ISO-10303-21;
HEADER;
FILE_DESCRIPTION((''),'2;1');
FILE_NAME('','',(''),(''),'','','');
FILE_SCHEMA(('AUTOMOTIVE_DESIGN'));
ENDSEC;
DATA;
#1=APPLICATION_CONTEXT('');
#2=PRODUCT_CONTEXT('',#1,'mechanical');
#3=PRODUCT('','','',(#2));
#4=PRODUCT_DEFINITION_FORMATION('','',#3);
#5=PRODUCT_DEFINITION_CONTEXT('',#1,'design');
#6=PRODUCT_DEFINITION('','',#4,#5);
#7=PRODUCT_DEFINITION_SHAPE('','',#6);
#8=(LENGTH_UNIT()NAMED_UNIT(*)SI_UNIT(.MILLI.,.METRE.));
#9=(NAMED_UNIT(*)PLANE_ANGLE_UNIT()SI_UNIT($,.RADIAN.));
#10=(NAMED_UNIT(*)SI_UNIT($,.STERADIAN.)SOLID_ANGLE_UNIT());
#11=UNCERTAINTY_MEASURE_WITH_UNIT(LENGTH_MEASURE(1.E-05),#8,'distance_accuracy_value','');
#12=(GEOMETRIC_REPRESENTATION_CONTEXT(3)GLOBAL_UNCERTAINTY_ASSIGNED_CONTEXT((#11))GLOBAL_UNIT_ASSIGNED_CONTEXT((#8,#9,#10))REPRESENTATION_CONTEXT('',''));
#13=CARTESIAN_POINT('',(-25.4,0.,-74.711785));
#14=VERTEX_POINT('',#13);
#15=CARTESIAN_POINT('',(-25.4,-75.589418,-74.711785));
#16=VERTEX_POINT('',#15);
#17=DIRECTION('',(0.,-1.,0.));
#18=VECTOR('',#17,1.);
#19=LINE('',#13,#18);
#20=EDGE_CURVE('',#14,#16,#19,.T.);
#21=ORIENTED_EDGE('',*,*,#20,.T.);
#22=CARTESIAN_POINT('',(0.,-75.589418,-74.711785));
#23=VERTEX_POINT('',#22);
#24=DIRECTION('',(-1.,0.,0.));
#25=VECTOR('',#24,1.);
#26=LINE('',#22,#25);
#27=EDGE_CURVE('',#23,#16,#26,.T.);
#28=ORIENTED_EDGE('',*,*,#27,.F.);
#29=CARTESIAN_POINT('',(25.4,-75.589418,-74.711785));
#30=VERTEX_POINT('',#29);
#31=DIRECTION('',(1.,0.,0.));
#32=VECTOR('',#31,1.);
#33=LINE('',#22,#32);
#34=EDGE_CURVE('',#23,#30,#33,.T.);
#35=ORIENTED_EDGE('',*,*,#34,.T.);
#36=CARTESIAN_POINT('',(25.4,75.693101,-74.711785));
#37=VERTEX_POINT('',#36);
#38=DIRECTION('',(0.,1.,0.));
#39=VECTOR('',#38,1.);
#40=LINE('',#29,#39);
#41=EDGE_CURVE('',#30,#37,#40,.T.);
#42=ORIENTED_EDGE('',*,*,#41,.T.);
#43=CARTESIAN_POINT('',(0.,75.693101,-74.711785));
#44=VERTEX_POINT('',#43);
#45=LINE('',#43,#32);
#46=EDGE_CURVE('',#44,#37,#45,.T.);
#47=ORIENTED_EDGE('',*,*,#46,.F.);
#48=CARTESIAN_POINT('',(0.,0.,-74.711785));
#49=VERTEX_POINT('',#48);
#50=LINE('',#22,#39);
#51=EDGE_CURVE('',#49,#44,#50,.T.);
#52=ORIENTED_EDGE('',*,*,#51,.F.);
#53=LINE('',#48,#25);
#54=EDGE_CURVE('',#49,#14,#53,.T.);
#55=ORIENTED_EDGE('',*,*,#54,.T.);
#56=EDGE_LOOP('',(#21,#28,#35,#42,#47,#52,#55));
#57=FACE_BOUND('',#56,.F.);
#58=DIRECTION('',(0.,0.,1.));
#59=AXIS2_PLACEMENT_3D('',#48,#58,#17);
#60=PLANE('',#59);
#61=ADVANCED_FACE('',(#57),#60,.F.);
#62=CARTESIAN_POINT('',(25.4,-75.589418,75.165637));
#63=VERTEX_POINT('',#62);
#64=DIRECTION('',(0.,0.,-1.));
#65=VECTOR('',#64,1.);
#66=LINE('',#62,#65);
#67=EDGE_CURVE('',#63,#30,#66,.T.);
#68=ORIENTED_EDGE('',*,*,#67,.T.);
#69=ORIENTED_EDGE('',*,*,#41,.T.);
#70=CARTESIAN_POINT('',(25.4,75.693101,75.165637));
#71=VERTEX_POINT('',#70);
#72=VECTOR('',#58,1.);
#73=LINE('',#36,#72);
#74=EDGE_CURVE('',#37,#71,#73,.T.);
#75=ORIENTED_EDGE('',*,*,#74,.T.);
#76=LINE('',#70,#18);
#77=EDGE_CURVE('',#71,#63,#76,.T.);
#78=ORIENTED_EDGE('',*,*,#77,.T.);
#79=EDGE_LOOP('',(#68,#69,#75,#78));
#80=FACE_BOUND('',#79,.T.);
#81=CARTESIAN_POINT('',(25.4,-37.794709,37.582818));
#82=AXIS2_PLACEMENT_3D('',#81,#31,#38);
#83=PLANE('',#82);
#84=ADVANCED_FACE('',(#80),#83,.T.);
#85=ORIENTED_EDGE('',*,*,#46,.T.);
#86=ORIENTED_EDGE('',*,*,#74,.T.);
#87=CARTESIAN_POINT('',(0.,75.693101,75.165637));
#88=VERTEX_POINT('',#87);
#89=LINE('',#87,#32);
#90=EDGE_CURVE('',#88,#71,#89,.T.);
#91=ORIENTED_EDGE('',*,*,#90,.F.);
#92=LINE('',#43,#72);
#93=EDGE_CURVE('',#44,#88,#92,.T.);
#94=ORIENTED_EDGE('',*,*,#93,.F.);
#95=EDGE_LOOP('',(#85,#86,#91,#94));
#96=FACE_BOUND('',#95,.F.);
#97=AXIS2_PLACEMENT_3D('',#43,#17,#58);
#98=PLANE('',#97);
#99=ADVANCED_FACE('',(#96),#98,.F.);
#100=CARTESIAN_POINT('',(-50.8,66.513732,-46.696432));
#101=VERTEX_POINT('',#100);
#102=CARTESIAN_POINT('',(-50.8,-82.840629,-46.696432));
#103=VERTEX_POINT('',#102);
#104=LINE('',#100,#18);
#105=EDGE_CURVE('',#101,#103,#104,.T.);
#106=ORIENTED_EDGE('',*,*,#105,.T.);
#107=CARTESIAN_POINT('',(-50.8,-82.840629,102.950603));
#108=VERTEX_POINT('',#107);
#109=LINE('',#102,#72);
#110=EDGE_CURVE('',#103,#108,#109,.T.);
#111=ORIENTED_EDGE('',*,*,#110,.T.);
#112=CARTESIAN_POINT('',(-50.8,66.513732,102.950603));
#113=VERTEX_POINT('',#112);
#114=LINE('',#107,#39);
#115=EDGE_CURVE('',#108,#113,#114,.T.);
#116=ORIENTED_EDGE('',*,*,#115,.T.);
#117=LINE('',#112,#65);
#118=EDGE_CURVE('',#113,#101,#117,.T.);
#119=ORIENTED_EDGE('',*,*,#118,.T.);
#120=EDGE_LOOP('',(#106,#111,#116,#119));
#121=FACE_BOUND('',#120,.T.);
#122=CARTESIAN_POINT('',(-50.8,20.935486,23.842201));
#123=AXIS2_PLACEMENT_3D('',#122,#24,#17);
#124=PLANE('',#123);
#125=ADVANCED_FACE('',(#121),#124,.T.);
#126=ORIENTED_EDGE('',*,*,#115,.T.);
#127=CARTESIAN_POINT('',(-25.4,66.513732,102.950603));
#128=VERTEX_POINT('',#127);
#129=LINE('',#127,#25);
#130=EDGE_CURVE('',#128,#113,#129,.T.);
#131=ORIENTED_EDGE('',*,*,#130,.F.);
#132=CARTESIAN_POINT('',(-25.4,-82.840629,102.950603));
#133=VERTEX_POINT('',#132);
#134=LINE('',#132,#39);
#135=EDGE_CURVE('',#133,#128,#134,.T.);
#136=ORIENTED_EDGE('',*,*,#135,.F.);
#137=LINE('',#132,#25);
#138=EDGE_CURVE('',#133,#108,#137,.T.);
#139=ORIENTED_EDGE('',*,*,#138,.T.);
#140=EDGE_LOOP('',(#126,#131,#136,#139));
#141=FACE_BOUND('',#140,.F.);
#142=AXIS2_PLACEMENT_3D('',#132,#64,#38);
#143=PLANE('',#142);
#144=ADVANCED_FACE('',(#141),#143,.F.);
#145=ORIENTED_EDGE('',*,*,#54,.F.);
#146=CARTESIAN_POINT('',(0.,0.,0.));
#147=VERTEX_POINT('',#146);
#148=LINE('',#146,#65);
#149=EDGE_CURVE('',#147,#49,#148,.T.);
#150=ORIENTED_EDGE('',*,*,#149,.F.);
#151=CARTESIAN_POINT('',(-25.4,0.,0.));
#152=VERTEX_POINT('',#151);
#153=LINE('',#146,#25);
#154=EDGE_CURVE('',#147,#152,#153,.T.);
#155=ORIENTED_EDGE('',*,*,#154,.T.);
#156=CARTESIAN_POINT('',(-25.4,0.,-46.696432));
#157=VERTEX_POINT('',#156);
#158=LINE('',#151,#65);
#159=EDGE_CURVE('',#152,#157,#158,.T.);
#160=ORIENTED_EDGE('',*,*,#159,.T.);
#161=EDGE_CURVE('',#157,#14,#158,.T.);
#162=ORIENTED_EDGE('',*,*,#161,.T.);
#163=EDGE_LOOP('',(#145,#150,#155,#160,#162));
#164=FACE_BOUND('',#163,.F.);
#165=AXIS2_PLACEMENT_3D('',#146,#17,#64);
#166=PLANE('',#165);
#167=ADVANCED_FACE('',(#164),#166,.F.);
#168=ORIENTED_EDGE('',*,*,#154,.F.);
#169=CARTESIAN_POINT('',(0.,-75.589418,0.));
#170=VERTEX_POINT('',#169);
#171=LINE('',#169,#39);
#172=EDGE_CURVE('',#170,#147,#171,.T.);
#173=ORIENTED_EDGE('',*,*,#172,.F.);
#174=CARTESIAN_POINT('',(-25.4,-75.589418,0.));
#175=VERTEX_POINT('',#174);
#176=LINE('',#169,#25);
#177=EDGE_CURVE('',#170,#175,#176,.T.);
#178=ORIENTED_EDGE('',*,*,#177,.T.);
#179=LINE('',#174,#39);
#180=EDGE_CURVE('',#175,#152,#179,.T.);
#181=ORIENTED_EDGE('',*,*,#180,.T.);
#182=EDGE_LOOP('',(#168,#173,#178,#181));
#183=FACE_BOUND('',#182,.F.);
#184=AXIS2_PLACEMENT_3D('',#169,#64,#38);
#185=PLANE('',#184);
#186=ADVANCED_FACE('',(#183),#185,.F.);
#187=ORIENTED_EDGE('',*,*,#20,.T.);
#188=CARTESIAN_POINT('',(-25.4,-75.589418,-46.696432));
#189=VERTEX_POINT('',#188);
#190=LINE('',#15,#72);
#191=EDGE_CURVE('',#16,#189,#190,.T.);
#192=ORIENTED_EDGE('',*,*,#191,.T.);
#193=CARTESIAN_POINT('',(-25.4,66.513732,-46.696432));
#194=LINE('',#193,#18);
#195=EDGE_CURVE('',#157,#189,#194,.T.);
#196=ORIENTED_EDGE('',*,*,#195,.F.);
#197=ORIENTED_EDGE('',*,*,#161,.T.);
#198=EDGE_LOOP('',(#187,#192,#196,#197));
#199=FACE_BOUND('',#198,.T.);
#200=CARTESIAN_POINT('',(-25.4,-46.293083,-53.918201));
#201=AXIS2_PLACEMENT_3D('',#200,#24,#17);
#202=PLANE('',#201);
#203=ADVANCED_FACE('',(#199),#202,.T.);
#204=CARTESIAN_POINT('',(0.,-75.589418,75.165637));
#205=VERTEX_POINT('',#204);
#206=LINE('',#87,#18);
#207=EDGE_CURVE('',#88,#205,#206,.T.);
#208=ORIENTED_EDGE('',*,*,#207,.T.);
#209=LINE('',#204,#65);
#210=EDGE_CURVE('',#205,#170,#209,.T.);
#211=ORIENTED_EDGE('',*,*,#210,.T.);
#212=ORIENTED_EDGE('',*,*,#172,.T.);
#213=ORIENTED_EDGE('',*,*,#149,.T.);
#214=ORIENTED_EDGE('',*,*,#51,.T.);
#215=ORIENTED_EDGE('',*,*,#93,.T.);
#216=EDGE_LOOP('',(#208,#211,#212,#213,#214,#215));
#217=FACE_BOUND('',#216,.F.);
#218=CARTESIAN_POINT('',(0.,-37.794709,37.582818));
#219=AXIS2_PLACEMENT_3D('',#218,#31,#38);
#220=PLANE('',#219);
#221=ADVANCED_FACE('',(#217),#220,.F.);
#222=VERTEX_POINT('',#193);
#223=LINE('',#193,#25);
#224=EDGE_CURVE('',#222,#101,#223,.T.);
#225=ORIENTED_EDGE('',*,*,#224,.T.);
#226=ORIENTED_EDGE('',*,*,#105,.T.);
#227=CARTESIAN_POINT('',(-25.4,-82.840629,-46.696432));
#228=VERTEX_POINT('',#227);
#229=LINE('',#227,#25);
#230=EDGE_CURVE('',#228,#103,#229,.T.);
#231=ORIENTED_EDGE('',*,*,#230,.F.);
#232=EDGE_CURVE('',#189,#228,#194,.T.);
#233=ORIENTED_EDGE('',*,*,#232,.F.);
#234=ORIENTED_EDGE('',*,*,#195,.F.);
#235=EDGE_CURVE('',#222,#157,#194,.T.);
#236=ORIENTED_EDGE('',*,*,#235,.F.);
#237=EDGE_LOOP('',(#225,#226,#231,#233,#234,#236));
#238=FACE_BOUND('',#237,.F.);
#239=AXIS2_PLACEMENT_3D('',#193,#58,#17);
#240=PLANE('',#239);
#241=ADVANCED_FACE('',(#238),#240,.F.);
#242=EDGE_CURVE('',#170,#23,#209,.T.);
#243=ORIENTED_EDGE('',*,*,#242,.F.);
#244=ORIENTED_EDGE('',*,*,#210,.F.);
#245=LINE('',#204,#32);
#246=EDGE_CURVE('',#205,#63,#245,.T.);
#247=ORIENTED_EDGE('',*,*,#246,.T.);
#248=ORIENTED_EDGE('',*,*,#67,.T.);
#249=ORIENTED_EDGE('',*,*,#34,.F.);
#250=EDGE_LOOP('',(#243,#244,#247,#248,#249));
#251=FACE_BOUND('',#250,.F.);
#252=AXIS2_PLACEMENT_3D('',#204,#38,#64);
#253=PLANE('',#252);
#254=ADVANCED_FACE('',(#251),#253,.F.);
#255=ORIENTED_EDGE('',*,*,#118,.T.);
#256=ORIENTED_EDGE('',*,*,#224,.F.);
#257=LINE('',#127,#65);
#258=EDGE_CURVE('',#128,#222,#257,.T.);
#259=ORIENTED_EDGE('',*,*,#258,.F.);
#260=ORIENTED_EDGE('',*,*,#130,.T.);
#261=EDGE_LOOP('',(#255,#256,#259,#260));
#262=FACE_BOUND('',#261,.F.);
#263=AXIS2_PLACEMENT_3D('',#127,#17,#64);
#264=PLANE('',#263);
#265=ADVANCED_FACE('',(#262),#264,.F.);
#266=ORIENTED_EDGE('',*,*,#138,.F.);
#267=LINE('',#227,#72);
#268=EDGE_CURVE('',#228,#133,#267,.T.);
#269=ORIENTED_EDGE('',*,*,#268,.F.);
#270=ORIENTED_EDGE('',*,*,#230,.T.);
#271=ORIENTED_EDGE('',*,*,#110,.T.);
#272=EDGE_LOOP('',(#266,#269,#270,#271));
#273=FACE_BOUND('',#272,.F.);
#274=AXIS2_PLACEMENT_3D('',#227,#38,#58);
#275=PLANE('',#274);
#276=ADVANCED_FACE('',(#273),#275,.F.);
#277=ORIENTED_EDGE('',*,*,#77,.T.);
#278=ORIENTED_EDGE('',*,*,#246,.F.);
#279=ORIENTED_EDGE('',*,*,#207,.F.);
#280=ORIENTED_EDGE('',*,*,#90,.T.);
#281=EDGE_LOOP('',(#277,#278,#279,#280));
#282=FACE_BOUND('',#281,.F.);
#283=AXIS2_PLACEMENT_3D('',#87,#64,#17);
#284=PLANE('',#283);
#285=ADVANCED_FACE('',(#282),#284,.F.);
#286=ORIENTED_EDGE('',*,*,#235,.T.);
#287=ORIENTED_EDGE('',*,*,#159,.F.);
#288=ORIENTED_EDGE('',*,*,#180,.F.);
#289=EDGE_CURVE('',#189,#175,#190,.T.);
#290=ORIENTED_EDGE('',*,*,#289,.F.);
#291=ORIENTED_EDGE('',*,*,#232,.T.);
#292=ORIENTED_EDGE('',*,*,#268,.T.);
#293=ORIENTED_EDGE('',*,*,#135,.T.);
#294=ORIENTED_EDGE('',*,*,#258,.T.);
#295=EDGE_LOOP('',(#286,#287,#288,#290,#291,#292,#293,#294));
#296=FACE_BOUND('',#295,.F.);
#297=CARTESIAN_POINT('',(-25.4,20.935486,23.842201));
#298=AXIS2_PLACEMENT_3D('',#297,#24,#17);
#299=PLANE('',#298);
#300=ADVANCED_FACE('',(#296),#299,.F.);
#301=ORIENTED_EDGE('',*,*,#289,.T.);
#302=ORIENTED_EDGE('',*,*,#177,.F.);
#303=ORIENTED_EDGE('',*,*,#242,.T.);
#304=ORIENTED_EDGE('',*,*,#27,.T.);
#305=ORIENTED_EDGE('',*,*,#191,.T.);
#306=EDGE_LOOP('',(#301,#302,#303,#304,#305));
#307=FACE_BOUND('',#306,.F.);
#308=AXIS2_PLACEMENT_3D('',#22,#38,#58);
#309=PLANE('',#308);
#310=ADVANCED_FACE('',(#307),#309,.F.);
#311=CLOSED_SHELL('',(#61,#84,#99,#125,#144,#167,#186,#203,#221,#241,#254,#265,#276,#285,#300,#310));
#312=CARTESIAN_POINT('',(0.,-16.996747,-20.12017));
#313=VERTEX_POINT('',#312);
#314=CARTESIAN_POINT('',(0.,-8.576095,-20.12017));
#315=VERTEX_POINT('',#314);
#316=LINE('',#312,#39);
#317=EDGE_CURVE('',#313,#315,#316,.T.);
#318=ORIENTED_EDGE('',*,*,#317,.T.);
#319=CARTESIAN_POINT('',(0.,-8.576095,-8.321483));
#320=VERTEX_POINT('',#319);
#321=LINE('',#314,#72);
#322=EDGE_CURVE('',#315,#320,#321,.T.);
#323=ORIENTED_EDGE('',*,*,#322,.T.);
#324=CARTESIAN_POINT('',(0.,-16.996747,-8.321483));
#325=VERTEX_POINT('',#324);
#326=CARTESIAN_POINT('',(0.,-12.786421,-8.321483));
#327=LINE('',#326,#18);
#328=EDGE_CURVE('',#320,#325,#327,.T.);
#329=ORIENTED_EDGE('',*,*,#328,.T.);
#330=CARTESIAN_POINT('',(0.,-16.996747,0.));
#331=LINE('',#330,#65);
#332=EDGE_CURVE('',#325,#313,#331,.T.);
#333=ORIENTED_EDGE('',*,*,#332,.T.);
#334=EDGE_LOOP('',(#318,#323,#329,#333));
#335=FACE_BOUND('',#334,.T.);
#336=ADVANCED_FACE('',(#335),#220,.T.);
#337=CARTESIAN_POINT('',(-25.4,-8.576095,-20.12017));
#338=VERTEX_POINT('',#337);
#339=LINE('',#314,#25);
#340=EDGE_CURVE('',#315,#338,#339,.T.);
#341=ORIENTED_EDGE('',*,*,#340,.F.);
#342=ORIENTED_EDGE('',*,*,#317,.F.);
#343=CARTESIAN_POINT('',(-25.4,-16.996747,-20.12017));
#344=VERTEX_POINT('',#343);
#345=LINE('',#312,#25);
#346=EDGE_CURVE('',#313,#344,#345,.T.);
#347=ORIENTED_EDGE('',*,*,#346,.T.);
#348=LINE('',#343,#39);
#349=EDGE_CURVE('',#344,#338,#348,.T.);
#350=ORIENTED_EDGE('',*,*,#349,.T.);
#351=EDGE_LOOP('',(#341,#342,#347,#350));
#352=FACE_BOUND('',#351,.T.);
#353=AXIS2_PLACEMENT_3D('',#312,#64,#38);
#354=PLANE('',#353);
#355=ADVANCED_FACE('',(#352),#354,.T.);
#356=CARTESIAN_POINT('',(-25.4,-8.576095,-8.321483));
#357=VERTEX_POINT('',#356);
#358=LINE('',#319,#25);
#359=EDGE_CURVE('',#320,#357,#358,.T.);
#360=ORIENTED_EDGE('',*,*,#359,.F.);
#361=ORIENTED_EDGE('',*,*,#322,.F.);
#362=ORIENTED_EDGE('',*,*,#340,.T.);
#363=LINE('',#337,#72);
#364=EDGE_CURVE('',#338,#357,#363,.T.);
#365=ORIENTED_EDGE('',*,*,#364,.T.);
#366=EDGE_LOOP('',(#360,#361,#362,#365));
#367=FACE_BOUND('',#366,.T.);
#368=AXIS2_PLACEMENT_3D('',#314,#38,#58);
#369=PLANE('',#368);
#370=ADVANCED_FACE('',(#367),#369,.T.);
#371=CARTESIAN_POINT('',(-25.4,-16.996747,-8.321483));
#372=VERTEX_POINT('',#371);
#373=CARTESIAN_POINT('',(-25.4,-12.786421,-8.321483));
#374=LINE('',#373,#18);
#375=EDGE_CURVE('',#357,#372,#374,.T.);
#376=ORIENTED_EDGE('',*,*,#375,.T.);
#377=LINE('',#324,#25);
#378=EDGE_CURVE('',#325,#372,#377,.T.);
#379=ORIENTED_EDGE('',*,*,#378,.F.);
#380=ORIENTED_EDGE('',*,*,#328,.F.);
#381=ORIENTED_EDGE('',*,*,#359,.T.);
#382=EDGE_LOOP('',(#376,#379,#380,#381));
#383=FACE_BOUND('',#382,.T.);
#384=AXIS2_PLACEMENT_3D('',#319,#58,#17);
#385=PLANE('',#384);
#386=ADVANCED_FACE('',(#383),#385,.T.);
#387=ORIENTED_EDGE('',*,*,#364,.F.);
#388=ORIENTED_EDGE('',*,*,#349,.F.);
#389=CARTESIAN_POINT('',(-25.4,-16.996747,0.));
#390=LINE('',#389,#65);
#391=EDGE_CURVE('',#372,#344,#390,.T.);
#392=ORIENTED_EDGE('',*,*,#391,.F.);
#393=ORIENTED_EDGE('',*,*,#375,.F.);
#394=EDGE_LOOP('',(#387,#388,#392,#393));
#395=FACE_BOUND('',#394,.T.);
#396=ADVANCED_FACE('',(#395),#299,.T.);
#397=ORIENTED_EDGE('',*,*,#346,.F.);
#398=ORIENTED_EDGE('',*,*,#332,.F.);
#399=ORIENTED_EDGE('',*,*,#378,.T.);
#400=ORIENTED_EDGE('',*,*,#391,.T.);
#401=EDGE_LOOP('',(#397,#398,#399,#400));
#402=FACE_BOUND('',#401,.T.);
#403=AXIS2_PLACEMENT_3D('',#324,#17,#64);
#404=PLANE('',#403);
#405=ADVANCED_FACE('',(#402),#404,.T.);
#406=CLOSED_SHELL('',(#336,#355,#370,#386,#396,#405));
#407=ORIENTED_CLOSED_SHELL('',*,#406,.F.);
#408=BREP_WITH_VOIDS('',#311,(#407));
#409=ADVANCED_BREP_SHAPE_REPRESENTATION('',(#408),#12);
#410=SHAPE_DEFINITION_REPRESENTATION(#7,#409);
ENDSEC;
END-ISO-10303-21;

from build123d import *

# Parameters (mm, degrees)
F0_W     = 75.5894184113
F0_H     = 75.1656368375
F0_W_2   = 75.6931006908
F1_DEPTH = 25.4
F2_W     = 58.5926715285
F2_H     = 41.5871664882
F2_W_2   = 8.5760951042
F2_H_2   = 8.3214826882
F2_W_3   = 8.4206517786
F3_DEPTH = 25.4
F4_W     = 91.1564920098
F4_H     = 141.0772651434
F4_H_2   = 8.5697695613
F5_DEPTH = 25.4


with BuildPart() as f1:
    # F0 (on Right) → F1 (new body)
    with BuildSketch(Plane.YZ):
        with Locations((-37.7947092056, 37.5828184187)):
            Rectangle(F0_W, F0_H)
        with Locations((37.8465503454, 37.5828184187)):
            Rectangle(F0_W_2, F0_H)
        Polygon((0, 0), (-75.5894184113, 0), (-75.5894184113, -74.7117847204), (75.6931006908, -74.7117847204), (75.6931006908, 0), align=None)
    extrude(amount=F1_DEPTH)

    # F2 (on face) → F3 (join)
    with BuildSketch(Plane(origin=(0, 0, 0), x_dir=(0, -1, 0), z_dir=(-1, 0, 0))):
        with Locations((46.293082647, -53.9182014763)):
            Rectangle(F2_W, F2_H)
        Polygon((0, -74.7117847204), (16.9967468828, -74.7117847204), (16.9967468828, -33.1246182323), (16.9967468828, -22.4458947778), (0, -22.4458947778), align=None)
        Polygon((16.9967468828, -33.1246182323), (75.5894184113, -33.1246182323), (75.5894184113, -20.1201699674), (16.9967468828, -20.1201699674), (16.9967468828, -22.4458947778), align=None)
        Polygon((16.9967468828, -20.1201699674), (75.5894184113, -20.1201699674), (75.5894184113, 0), (16.9967468828, 0), (16.9967468828, -8.3214826882), align=None)
        Polygon((0, -22.4458947778), (16.9967468828, -22.4458947778), (16.9967468828, -20.1201699674), (8.5760951042, -20.1201699674), (8.5760951042, -8.3214826882), (0, -8.3214826882), align=None)
        with Locations((4.2880475521, -4.1607413441)):
            Rectangle(F2_W_2, F2_H_2)
        with Locations((12.7864209935, -4.1607413441)):
            Rectangle(F2_W_3, F2_H_2)
    extrude(amount=F3_DEPTH)

    # F4 (on face) → F5 (join)
    with BuildSketch(Plane(origin=(-25.4, 0, 0), x_dir=(0, -1, 0), z_dir=(-1, 0, 0))):
        with Locations((-20.9354860708, 23.8422006369)):
            Rectangle(F4_W, F4_H)
        Polygon((24.6427599341, 102.9506027699), (24.6427599341, 94.3808332086), (24.6427599341, -46.6964319348), (82.840628922, -46.6964319348), (82.840628922, 102.9506027699), align=None)
        with Locations((-20.9354860708, 98.6657179892)):
            Rectangle(F4_W, F4_H_2)
    extrude(amount=F5_DEPTH)


solid = f1.part
